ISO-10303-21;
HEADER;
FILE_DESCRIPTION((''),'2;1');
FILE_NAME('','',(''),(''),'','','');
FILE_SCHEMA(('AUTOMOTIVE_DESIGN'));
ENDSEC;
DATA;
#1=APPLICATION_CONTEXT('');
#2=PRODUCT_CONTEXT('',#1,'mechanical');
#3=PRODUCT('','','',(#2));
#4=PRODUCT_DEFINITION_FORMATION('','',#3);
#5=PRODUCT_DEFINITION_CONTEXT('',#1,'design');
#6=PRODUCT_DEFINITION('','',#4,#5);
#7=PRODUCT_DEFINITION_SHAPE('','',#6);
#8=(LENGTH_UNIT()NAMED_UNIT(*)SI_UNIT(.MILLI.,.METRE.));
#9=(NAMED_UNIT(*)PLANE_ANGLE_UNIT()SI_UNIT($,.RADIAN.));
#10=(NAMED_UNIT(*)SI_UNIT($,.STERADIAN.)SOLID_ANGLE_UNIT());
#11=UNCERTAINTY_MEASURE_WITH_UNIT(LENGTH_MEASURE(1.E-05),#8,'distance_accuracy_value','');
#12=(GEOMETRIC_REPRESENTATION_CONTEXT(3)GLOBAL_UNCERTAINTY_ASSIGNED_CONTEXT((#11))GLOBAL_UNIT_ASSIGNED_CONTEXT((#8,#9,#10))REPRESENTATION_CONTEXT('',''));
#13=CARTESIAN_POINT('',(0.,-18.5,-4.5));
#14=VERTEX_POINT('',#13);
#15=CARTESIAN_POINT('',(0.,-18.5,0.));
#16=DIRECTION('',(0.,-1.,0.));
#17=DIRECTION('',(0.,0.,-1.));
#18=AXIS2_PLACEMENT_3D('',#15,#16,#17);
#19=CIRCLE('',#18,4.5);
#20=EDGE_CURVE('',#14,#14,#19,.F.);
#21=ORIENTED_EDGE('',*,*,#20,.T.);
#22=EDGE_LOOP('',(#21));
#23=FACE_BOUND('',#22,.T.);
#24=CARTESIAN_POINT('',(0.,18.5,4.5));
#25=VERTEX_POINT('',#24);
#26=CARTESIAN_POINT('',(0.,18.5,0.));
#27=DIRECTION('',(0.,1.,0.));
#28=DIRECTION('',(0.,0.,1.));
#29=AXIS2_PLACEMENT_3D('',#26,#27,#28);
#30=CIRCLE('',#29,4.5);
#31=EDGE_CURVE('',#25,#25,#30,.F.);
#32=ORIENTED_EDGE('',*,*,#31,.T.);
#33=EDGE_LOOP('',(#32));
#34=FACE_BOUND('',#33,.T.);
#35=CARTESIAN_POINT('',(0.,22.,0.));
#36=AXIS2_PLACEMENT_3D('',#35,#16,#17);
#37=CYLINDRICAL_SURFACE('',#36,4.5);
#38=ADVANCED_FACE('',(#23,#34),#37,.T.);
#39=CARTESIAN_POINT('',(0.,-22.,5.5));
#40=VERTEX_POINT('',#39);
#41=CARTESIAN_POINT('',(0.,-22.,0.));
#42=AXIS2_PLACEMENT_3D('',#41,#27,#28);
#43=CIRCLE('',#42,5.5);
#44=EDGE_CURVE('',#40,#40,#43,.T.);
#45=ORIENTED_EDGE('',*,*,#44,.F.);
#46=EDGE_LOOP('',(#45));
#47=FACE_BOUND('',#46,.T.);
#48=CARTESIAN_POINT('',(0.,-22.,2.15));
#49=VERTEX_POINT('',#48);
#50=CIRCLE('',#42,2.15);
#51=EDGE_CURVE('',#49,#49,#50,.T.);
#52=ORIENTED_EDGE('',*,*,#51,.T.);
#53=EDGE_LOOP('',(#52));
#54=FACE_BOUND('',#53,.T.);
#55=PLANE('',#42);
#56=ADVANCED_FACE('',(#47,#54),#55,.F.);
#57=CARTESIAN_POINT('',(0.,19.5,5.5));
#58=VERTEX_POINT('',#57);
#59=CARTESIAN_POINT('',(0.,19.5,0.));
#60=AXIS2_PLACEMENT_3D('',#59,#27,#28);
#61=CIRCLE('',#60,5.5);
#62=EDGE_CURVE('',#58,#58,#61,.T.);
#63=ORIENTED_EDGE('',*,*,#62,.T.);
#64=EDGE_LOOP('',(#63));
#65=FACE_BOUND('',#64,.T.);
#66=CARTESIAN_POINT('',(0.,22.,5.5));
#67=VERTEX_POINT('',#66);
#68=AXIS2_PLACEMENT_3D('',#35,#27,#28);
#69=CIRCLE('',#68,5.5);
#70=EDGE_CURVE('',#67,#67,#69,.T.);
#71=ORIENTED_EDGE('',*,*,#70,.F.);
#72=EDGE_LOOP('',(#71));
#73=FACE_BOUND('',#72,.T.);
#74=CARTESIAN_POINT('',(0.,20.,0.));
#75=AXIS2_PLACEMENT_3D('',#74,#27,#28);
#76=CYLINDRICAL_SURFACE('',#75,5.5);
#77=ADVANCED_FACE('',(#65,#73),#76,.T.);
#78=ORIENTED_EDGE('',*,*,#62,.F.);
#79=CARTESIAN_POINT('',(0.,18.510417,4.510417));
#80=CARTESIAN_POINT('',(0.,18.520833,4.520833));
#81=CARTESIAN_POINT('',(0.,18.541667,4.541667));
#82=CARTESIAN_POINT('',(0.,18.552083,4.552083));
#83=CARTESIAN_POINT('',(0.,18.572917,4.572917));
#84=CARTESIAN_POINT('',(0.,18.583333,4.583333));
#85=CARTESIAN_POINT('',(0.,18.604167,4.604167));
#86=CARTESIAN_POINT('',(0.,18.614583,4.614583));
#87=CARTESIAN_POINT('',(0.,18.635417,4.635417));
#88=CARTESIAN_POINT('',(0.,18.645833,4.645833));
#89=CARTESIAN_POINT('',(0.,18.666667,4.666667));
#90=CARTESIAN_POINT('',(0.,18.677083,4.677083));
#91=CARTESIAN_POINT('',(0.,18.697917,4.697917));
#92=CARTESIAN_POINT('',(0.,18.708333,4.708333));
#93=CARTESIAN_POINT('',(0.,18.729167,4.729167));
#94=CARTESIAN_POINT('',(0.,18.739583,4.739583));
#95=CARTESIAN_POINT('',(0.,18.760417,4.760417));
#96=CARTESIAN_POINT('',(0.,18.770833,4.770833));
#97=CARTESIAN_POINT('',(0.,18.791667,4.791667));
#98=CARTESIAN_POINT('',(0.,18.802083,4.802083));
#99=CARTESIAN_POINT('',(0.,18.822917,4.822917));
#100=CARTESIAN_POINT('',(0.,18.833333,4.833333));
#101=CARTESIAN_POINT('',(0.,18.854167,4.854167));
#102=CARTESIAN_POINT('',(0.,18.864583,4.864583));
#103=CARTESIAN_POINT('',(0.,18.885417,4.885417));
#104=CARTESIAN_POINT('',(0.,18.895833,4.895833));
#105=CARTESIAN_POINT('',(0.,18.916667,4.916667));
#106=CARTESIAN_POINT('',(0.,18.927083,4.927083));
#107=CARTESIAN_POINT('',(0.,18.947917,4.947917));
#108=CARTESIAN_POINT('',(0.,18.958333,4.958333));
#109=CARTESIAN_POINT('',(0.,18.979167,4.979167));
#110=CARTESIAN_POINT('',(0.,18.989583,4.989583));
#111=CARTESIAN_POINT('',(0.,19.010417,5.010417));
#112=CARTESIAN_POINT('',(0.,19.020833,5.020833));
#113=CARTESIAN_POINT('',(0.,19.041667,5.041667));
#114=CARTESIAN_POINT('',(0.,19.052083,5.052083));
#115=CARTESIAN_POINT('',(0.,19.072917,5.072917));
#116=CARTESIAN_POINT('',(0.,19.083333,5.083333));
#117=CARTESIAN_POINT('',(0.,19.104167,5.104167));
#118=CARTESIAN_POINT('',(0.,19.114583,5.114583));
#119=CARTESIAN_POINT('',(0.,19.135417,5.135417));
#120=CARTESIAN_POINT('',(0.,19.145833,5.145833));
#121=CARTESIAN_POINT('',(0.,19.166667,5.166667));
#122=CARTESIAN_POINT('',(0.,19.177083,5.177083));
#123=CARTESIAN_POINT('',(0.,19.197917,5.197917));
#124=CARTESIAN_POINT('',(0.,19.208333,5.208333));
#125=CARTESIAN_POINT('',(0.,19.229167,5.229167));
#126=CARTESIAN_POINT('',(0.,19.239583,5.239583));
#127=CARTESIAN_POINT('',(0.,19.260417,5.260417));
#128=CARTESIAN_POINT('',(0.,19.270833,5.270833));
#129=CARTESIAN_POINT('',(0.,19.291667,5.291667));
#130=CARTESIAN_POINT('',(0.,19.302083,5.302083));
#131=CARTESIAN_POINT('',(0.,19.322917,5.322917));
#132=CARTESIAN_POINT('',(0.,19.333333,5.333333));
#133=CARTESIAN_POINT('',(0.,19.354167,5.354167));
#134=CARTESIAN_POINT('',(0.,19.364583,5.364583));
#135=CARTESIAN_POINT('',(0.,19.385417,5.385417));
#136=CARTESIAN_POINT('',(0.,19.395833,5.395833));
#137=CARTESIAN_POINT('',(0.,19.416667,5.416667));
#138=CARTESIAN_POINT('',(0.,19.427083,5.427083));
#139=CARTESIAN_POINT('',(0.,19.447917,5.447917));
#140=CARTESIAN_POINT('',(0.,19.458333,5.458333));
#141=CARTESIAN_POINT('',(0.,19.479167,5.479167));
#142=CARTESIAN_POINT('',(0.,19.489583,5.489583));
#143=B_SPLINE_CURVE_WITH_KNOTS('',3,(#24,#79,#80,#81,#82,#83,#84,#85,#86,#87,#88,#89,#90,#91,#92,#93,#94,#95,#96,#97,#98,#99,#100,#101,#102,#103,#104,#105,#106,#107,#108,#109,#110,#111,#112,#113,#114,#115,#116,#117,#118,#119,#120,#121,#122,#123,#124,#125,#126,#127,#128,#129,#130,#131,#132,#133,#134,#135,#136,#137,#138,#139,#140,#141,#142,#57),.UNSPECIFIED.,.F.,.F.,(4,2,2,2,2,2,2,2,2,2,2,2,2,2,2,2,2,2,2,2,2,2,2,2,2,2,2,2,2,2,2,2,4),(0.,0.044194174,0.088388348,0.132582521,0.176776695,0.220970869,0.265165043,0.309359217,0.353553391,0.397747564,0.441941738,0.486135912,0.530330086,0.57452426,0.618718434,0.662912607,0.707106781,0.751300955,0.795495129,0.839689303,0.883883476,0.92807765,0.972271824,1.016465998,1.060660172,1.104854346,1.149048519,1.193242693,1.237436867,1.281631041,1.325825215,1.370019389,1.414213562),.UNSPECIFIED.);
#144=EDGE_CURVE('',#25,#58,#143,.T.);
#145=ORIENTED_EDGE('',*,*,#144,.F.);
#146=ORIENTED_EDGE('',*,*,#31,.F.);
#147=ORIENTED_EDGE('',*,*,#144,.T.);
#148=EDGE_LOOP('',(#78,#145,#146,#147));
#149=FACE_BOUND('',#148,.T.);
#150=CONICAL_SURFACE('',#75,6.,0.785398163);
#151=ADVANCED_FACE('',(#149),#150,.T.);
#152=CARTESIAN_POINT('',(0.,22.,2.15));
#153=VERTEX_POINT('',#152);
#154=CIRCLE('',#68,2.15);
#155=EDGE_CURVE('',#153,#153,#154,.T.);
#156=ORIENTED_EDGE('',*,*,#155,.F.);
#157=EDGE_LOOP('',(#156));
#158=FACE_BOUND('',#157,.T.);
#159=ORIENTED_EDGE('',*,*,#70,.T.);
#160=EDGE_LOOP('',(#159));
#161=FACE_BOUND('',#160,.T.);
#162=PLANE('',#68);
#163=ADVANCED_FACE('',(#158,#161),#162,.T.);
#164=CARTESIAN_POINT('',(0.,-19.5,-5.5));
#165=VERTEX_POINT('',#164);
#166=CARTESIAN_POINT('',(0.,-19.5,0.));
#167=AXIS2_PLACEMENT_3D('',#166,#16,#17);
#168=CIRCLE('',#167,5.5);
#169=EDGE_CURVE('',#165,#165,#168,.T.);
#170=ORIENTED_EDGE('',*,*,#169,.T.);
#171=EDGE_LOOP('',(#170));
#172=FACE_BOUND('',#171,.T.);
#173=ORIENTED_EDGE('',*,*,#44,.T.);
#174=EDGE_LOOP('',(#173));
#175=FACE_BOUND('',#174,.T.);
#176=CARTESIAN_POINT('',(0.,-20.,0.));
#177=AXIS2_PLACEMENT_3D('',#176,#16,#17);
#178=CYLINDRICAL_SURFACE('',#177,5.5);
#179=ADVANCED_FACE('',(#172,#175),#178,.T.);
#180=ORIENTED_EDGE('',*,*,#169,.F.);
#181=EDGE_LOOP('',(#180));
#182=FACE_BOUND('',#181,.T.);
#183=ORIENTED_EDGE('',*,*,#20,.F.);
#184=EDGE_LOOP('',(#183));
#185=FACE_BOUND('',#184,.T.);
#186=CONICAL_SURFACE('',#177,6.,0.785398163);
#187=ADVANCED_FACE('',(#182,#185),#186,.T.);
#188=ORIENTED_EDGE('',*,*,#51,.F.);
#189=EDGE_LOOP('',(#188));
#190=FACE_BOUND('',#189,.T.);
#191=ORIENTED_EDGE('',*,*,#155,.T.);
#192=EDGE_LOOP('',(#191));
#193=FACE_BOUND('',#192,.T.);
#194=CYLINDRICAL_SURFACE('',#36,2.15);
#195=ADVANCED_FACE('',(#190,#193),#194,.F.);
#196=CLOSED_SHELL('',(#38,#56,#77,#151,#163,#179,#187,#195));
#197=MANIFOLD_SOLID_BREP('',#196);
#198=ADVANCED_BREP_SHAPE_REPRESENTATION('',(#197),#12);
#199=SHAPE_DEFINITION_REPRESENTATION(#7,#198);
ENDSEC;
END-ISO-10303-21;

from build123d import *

# Parameters (mm, degrees)
SKETCH_2_R      = 4.5
SKETCH_2_R_2    = 2.15
EXTRUDE_1_DEPTH = 22
EXTRUDE_START   = -2
SKETCH_3_R      = 5.5
SKETCH_3_R_2    = 2.15
EXTRUDE_2_DEPTH = 2
CHAMFER_1_SIZE  = 1.5


with BuildPart() as part:
    # 草图2 → 凸台-拉伸1 (new, symmetric)
    with BuildSketch(Plane(origin=(0, 0, 0), x_dir=(1, 0, 0), z_dir=(0, 1, 0))):
        with Locations(Location((0, 0, 0), (0, 0, 270))):
            Circle(SKETCH_2_R)
        with Locations(Location((0, 0, 0), (0, 0, 270))):
            Circle(SKETCH_2_R_2, mode=Mode.SUBTRACT)
    extrude(amount=EXTRUDE_1_DEPTH, both=True)

    # 草图3 → 凸台-拉伸2 (add)
    with BuildSketch(Plane(origin=(0, 22, 0), x_dir=(1, 0, 0), z_dir=(0, 1, 0)).offset(EXTRUDE_START)):
        with Locations(Location((0, 0, 0), (0, 0, 270))):
            Circle(SKETCH_3_R)
        with Locations(Location((0, 0, 0), (0, 0, 270))):
            Circle(SKETCH_3_R_2, mode=Mode.SUBTRACT)
    extrude_2 = extrude(amount=EXTRUDE_2_DEPTH)

    # 镜向1: 凸台-拉伸2 across plane
    add(extrude_2.mirror(Plane.ZX))

    # 倒角1
    # the kernel refuses this chamfer: 1.5 mm, written as the material it adds along each edge
    with BuildSketch(Plane(origin=(0, -20, 0), x_dir=(0, 0, 1), z_dir=(-1, 0, 0))) as chamfer_1_piece_1_section:
        Polygon((4.5 + CHAMFER_1_SIZE, 0), (4.5, CHAMFER_1_SIZE), (4.5, 0), align=None)
    chamfer_1_piece_1 = revolve(axis=Axis((0, -20, 0), (0, 1, 0)), mode=Mode.PRIVATE)
    chamfer_1_piece_1 = chamfer_1_piece_1 & Plane(origin=(0, -19.001553526, 0), x_dir=(0, 0, 1), z_dir=(0, 1, 0)) * Cylinder(5.5, 24, mode=Mode.PRIVATE)
    add(chamfer_1_piece_1)
    with BuildSketch(Plane(origin=(0, 20, 0), x_dir=(0, 0, 1), z_dir=(-1, 0, 0))) as chamfer_1_piece_2_section:
        Polygon((4.5, -CHAMFER_1_SIZE), (4.5 + CHAMFER_1_SIZE, 0), (4.5, 0), align=None)
    chamfer_1_piece_2 = revolve(axis=Axis((0, 20, 0), (0, 1, 0)), mode=Mode.PRIVATE)
    chamfer_1_piece_2 = chamfer_1_piece_2 & Plane(origin=(0, 19.001553526, 0), x_dir=(0, 0, 1), z_dir=(0, -1, 0)) * Cylinder(5.5, 24, mode=Mode.PRIVATE)
    add(chamfer_1_piece_2)


solid = part.part
